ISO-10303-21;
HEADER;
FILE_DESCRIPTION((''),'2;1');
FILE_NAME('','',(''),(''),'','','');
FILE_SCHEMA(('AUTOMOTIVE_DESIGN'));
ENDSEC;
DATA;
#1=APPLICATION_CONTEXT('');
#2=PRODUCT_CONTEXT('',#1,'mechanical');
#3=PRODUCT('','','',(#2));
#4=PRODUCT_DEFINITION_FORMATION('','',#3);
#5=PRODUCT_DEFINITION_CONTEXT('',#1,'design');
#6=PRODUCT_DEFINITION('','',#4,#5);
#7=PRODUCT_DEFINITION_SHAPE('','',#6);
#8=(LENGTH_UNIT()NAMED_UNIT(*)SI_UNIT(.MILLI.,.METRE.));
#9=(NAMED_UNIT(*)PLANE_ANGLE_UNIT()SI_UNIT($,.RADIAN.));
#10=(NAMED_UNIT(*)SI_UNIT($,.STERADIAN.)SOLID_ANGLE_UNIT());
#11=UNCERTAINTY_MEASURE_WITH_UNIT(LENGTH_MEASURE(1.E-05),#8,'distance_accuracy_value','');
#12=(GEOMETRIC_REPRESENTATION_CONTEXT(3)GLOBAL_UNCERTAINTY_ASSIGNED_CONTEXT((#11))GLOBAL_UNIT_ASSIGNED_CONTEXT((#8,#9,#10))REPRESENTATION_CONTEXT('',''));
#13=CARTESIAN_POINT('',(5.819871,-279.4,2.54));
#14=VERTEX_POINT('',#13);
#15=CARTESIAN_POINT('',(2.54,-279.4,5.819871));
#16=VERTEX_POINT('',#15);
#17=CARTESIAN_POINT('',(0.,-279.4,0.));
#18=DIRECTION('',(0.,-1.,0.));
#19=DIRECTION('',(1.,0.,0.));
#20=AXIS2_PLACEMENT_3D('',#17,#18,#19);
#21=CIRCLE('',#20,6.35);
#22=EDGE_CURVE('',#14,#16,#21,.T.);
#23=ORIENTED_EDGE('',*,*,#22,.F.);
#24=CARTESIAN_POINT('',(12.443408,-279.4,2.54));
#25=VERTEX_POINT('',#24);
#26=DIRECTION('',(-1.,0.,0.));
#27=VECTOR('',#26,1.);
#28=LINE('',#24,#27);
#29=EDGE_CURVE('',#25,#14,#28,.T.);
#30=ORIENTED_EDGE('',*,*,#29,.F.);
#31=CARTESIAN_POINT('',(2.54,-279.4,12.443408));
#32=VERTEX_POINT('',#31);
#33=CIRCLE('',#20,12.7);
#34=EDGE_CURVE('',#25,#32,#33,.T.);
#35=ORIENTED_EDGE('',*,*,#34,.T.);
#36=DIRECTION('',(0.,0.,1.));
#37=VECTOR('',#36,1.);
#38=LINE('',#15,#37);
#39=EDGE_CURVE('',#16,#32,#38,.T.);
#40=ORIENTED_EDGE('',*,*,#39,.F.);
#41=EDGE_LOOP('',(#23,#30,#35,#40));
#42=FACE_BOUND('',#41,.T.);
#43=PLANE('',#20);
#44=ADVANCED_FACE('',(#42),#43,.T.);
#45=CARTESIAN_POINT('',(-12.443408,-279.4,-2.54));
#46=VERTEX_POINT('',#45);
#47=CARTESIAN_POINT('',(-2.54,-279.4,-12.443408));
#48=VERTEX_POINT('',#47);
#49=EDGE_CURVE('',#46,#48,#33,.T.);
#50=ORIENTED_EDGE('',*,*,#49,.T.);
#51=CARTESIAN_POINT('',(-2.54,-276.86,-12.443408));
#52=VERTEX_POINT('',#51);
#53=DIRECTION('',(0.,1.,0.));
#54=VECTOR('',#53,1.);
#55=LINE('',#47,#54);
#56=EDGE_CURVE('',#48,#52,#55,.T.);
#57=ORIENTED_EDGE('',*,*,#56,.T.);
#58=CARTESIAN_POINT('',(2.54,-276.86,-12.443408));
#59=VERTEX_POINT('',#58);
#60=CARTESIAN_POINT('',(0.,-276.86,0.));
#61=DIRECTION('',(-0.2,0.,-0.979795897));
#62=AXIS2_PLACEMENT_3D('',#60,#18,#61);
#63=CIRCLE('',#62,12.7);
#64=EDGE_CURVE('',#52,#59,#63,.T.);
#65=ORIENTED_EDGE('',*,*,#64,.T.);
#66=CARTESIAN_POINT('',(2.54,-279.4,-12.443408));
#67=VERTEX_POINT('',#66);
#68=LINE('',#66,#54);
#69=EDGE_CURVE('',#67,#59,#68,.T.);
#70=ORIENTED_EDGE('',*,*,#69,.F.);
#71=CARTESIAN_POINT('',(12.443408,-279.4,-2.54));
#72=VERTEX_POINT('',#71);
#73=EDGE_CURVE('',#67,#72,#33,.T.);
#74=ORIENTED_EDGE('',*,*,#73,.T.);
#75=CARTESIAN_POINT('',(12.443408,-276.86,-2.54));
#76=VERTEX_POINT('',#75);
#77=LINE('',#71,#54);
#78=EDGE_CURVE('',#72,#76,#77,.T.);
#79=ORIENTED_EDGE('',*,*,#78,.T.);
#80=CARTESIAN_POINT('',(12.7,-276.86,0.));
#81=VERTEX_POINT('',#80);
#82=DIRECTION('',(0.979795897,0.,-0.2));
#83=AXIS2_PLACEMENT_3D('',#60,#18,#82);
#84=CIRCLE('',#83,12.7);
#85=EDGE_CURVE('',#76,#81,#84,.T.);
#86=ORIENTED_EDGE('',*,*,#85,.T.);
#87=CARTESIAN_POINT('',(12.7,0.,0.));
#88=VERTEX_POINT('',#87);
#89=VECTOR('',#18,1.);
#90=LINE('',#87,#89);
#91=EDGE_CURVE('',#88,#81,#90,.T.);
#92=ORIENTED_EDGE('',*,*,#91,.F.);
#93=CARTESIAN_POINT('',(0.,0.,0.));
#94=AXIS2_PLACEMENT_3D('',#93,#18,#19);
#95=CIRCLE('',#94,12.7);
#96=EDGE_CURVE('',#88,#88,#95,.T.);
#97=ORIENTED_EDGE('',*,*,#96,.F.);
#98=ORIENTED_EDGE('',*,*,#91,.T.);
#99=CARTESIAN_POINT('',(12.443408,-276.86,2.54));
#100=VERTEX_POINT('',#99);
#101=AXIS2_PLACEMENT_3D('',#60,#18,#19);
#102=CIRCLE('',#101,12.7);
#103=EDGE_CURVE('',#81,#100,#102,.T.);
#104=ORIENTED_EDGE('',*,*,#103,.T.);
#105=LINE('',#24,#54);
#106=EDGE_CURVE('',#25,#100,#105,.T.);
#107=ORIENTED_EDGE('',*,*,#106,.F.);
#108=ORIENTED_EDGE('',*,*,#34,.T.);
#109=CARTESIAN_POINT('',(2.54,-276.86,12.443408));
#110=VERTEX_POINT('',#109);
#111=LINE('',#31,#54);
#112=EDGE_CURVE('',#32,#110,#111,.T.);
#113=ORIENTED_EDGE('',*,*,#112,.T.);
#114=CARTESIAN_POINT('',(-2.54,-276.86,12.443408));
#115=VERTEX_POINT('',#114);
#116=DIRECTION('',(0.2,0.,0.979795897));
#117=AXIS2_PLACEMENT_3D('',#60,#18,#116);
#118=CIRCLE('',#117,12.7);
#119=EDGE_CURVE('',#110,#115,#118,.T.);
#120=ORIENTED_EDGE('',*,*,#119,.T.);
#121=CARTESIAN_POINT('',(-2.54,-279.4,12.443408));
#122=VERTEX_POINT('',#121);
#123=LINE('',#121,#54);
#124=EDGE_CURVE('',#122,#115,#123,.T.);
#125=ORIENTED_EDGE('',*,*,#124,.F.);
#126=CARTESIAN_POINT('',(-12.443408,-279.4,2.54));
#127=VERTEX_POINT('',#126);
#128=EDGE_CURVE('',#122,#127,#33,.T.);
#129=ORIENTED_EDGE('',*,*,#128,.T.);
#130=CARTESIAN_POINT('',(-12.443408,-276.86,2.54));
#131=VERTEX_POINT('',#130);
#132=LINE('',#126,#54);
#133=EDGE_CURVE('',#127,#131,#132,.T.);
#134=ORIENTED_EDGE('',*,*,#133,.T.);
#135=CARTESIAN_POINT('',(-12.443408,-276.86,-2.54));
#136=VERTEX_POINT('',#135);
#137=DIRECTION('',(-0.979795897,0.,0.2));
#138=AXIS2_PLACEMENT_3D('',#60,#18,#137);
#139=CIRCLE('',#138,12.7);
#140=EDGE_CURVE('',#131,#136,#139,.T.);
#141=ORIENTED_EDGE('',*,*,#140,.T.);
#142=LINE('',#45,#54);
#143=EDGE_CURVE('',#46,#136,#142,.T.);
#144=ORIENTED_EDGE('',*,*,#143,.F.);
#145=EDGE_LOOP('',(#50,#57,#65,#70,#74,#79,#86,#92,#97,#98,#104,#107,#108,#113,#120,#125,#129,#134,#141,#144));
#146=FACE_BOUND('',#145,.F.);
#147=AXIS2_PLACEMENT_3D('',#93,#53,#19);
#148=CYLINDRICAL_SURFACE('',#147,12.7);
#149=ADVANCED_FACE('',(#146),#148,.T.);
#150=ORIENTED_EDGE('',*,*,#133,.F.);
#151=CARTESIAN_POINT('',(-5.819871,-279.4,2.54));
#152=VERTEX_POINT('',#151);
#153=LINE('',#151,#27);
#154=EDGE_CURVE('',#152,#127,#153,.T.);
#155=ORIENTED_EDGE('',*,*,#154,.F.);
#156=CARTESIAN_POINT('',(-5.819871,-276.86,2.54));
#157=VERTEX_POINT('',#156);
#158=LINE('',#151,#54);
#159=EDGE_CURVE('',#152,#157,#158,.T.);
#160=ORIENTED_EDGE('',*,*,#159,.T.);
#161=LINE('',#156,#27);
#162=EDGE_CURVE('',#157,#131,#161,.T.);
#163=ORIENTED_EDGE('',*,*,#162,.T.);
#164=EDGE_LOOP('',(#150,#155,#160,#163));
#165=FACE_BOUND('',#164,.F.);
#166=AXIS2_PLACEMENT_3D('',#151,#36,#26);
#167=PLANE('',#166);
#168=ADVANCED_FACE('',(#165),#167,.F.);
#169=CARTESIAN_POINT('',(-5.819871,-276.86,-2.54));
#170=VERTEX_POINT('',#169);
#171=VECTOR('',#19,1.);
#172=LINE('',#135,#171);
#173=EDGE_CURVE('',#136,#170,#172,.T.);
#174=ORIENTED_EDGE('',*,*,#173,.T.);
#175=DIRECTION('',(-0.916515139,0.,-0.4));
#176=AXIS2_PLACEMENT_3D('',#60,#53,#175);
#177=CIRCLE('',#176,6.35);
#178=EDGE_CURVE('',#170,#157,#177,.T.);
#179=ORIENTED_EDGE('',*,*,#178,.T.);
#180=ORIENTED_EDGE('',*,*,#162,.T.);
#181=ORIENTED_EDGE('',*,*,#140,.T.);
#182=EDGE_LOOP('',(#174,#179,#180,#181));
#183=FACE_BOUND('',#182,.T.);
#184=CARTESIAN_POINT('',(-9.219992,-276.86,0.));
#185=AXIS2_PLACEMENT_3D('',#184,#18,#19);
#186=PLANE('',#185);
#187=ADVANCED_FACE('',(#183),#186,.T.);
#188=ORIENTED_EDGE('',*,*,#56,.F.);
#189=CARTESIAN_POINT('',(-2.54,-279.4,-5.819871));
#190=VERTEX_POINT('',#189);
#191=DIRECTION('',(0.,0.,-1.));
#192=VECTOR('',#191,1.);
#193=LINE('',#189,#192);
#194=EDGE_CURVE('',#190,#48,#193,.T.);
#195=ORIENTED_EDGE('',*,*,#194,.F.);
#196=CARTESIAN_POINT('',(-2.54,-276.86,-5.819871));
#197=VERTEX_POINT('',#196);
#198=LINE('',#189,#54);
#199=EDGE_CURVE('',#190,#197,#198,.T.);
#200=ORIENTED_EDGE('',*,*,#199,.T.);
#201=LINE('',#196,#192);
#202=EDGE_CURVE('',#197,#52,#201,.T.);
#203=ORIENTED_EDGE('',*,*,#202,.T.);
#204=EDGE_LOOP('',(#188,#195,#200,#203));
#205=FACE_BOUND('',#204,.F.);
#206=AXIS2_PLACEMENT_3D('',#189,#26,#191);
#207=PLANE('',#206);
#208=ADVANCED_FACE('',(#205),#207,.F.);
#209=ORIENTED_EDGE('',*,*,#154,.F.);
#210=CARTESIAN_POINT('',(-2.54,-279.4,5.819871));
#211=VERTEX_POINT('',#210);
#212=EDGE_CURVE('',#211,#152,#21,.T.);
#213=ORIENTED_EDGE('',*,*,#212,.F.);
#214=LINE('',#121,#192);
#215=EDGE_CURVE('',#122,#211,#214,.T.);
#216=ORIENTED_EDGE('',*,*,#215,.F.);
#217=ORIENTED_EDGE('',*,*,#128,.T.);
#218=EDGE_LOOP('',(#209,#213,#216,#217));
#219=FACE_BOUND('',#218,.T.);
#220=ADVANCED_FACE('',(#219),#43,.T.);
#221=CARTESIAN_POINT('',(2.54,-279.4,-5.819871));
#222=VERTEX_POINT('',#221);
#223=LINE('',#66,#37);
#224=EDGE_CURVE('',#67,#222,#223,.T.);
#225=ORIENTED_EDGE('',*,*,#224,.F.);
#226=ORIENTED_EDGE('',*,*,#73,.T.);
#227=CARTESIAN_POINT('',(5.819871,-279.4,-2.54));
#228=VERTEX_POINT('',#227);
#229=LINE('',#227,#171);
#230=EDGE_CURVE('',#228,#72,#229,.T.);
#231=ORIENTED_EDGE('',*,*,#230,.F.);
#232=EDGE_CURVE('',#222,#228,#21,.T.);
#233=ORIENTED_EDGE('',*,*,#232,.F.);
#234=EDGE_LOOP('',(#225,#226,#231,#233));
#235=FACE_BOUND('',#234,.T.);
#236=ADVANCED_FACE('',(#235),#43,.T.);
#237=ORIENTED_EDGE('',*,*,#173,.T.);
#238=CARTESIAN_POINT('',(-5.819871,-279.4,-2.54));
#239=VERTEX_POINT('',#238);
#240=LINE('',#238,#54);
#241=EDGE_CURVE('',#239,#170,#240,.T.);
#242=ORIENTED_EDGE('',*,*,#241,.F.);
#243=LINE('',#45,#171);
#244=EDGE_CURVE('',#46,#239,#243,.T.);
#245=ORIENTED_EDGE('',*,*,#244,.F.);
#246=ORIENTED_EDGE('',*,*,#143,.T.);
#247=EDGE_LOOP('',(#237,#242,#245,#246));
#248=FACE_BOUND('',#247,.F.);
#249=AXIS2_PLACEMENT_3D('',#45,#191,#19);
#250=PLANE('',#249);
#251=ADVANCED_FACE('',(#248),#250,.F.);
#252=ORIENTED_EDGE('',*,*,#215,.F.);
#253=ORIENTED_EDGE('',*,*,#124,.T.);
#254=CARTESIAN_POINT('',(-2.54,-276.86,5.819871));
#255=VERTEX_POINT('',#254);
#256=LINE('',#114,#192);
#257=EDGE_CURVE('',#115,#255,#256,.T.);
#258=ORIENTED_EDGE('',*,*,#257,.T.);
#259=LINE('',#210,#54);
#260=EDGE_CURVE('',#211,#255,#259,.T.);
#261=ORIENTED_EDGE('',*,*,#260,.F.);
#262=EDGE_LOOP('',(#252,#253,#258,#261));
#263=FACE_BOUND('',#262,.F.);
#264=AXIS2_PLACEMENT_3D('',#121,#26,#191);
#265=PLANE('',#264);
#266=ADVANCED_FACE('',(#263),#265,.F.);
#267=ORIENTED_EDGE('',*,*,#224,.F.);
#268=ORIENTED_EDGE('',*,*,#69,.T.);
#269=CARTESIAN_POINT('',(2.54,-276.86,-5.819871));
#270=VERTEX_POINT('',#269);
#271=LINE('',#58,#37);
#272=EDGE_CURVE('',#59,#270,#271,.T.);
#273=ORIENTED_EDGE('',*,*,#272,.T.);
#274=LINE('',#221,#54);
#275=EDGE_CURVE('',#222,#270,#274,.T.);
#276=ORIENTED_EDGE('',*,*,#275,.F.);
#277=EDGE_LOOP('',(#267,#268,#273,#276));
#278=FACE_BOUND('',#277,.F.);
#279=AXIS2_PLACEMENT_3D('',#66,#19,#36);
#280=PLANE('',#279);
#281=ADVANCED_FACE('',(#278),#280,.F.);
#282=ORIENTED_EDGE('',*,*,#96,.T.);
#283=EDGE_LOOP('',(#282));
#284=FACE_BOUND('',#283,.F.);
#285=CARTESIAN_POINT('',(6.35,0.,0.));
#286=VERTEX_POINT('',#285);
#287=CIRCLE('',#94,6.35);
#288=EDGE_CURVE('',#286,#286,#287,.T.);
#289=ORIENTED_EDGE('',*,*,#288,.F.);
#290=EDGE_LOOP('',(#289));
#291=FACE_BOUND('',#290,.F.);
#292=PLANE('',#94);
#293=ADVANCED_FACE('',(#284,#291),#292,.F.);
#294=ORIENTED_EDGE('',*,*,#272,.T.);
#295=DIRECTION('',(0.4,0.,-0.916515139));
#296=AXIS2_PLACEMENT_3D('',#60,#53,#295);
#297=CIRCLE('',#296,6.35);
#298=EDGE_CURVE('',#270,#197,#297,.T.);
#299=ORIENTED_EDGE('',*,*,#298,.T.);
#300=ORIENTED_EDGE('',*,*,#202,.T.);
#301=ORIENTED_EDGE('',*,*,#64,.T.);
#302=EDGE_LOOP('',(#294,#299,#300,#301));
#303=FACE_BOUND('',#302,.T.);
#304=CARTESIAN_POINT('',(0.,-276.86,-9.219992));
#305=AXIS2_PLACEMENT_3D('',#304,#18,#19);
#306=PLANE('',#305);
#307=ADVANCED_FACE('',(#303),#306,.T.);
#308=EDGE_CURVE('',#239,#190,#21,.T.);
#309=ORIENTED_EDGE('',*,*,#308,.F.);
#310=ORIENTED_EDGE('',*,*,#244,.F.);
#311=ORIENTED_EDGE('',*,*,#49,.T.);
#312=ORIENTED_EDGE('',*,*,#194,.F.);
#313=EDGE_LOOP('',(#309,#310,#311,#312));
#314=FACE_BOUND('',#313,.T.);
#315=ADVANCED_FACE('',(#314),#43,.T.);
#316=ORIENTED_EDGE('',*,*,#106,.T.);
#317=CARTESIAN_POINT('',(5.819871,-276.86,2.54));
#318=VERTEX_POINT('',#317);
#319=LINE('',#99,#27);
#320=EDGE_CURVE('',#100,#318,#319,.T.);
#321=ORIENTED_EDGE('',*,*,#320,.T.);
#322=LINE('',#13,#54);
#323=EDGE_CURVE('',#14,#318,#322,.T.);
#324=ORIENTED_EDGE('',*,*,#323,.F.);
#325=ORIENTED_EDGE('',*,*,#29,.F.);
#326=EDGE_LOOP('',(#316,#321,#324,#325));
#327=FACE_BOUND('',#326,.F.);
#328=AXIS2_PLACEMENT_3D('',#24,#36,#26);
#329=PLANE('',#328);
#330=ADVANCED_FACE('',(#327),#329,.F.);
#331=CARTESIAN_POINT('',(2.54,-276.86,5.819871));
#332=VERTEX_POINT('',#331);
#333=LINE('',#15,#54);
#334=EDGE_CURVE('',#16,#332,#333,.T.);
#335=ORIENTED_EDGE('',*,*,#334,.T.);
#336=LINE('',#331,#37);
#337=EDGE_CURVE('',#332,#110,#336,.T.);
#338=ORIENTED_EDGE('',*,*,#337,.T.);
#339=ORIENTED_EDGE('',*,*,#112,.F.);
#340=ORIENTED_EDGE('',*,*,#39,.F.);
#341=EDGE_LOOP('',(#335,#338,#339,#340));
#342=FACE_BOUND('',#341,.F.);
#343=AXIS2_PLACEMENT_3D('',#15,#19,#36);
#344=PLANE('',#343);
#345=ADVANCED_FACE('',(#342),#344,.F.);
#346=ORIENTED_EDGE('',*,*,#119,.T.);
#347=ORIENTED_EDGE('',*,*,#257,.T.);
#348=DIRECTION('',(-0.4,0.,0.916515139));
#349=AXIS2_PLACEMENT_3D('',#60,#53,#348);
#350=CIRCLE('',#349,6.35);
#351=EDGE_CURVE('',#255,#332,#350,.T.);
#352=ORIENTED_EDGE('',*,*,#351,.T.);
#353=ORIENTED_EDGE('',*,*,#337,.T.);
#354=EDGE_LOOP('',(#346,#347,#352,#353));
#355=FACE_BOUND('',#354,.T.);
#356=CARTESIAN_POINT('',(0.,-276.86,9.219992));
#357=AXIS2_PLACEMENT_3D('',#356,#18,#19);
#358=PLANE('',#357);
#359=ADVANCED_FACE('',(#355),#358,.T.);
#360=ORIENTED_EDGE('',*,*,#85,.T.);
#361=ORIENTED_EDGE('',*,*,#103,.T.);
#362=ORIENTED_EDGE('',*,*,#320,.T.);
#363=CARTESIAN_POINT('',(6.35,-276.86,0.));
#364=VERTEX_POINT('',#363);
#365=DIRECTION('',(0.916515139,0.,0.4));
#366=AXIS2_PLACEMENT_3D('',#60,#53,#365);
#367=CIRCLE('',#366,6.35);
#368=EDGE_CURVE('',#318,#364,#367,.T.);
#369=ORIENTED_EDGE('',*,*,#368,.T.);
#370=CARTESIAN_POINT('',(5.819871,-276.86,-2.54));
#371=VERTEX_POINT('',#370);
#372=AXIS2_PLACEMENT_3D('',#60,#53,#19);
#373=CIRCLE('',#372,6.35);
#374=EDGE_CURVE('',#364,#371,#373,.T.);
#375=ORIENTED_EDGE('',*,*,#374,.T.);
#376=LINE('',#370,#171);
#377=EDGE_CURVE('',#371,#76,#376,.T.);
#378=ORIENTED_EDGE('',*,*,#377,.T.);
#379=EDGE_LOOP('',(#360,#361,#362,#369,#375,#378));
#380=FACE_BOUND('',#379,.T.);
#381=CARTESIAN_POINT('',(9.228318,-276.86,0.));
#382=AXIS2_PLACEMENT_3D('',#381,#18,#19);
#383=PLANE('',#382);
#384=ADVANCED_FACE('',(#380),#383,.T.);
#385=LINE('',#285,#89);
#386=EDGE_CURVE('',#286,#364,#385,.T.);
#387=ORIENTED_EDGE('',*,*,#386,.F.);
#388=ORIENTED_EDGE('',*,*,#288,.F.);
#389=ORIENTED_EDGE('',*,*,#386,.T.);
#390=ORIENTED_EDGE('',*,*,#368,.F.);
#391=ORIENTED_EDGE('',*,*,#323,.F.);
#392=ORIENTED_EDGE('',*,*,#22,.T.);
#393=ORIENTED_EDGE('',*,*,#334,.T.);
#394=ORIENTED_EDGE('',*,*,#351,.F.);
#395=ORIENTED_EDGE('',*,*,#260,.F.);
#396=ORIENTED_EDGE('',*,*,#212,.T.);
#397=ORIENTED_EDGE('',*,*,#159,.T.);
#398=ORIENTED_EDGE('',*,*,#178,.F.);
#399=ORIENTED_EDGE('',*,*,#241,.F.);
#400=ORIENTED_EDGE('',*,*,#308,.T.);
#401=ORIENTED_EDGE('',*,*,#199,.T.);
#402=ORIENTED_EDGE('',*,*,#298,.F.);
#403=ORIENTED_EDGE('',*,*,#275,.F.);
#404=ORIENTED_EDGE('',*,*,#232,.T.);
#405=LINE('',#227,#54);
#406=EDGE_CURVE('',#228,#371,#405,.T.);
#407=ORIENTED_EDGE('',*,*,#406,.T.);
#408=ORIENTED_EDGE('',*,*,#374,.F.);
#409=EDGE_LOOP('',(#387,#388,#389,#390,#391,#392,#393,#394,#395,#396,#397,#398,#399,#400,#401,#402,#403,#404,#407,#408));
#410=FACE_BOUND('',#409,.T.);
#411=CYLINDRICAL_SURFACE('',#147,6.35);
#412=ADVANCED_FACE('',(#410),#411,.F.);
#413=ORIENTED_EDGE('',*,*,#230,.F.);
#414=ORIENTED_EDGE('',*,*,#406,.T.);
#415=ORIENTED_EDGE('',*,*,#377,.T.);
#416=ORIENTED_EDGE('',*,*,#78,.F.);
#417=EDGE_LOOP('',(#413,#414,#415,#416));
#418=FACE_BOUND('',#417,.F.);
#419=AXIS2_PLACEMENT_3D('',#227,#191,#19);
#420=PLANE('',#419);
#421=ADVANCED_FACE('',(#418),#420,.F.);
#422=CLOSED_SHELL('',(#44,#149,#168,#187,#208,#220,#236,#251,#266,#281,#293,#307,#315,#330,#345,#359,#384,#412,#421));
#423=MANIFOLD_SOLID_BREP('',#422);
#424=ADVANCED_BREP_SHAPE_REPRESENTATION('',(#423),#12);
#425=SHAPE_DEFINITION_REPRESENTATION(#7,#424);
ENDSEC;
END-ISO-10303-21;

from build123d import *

# Parameters (mm, degrees)
F0_R     = 12.7
F0_R_2   = 6.35
F1_DEPTH = 279.4
F3_DEPTH = 2.54


with BuildPart() as f1:
    # F0 (on Front) → F1 (new body)
    with BuildSketch(Plane.XZ):
        Circle(F0_R)
        Circle(F0_R_2, mode=Mode.SUBTRACT)
    extrude(amount=F1_DEPTH)

    # F2 (on face) → F3 (cut)
    with BuildSketch(Plane.XZ.offset(279.4)):
        with BuildLine():
            Line((2.54, 5.8198711326), (2.54, 12.4434078933))
            ThreePointArc((2.54, 12.4434078933), (0, 12.7), (-2.54, 12.4434078933))
            Line((-2.54, 12.4434078933), (-2.54, 5.8198711326))
            ThreePointArc((-2.54, 5.8198711326), (0, 6.35), (2.54, 5.8198711326))
        make_face()
        with BuildLine():
            Line((-5.8198711326, 2.54), (-12.4434078933, 2.54))
            ThreePointArc((-12.4434078933, 2.54), (-12.7, 0), (-12.4434078933, -2.54))
            Line((-12.4434078933, -2.54), (-5.8198711326, -2.54))
            ThreePointArc((-5.8198711326, -2.54), (-6.35, 0), (-5.8198711326, 2.54))
        make_face()
        with BuildLine():
            ThreePointArc((-2.54, -12.4434078933), (0, -12.7), (2.54, -12.4434078933))
            Line((2.54, -12.4434078933), (2.54, -5.8198711326))
            ThreePointArc((2.54, -5.8198711326), (0, -6.35), (-2.54, -5.8198711326))
            Line((-2.54, -5.8198711326), (-2.54, -12.4434078933))
        make_face()
        with BuildLine():
            ThreePointArc((12.4434078933, -2.54), (12.6356891432, -1.2764638175), (12.7, 0))
            ThreePointArc((12.7, 0), (12.6356891432, 1.2764638175), (12.4434078933, 2.54))
            Line((12.4434078933, 2.54), (5.8198711326, 2.54))
            ThreePointArc((5.8198711326, 2.54), (6.2160550871, 1.2973662374), (6.35, 0))
            ThreePointArc((6.35, 0), (6.2160550871, -1.2973662374), (5.8198711326, -2.54))
            Line((5.8198711326, -2.54), (12.4434078933, -2.54))
        make_face()
    extrude(amount=-F3_DEPTH, mode=Mode.SUBTRACT)


solid = f1.part
